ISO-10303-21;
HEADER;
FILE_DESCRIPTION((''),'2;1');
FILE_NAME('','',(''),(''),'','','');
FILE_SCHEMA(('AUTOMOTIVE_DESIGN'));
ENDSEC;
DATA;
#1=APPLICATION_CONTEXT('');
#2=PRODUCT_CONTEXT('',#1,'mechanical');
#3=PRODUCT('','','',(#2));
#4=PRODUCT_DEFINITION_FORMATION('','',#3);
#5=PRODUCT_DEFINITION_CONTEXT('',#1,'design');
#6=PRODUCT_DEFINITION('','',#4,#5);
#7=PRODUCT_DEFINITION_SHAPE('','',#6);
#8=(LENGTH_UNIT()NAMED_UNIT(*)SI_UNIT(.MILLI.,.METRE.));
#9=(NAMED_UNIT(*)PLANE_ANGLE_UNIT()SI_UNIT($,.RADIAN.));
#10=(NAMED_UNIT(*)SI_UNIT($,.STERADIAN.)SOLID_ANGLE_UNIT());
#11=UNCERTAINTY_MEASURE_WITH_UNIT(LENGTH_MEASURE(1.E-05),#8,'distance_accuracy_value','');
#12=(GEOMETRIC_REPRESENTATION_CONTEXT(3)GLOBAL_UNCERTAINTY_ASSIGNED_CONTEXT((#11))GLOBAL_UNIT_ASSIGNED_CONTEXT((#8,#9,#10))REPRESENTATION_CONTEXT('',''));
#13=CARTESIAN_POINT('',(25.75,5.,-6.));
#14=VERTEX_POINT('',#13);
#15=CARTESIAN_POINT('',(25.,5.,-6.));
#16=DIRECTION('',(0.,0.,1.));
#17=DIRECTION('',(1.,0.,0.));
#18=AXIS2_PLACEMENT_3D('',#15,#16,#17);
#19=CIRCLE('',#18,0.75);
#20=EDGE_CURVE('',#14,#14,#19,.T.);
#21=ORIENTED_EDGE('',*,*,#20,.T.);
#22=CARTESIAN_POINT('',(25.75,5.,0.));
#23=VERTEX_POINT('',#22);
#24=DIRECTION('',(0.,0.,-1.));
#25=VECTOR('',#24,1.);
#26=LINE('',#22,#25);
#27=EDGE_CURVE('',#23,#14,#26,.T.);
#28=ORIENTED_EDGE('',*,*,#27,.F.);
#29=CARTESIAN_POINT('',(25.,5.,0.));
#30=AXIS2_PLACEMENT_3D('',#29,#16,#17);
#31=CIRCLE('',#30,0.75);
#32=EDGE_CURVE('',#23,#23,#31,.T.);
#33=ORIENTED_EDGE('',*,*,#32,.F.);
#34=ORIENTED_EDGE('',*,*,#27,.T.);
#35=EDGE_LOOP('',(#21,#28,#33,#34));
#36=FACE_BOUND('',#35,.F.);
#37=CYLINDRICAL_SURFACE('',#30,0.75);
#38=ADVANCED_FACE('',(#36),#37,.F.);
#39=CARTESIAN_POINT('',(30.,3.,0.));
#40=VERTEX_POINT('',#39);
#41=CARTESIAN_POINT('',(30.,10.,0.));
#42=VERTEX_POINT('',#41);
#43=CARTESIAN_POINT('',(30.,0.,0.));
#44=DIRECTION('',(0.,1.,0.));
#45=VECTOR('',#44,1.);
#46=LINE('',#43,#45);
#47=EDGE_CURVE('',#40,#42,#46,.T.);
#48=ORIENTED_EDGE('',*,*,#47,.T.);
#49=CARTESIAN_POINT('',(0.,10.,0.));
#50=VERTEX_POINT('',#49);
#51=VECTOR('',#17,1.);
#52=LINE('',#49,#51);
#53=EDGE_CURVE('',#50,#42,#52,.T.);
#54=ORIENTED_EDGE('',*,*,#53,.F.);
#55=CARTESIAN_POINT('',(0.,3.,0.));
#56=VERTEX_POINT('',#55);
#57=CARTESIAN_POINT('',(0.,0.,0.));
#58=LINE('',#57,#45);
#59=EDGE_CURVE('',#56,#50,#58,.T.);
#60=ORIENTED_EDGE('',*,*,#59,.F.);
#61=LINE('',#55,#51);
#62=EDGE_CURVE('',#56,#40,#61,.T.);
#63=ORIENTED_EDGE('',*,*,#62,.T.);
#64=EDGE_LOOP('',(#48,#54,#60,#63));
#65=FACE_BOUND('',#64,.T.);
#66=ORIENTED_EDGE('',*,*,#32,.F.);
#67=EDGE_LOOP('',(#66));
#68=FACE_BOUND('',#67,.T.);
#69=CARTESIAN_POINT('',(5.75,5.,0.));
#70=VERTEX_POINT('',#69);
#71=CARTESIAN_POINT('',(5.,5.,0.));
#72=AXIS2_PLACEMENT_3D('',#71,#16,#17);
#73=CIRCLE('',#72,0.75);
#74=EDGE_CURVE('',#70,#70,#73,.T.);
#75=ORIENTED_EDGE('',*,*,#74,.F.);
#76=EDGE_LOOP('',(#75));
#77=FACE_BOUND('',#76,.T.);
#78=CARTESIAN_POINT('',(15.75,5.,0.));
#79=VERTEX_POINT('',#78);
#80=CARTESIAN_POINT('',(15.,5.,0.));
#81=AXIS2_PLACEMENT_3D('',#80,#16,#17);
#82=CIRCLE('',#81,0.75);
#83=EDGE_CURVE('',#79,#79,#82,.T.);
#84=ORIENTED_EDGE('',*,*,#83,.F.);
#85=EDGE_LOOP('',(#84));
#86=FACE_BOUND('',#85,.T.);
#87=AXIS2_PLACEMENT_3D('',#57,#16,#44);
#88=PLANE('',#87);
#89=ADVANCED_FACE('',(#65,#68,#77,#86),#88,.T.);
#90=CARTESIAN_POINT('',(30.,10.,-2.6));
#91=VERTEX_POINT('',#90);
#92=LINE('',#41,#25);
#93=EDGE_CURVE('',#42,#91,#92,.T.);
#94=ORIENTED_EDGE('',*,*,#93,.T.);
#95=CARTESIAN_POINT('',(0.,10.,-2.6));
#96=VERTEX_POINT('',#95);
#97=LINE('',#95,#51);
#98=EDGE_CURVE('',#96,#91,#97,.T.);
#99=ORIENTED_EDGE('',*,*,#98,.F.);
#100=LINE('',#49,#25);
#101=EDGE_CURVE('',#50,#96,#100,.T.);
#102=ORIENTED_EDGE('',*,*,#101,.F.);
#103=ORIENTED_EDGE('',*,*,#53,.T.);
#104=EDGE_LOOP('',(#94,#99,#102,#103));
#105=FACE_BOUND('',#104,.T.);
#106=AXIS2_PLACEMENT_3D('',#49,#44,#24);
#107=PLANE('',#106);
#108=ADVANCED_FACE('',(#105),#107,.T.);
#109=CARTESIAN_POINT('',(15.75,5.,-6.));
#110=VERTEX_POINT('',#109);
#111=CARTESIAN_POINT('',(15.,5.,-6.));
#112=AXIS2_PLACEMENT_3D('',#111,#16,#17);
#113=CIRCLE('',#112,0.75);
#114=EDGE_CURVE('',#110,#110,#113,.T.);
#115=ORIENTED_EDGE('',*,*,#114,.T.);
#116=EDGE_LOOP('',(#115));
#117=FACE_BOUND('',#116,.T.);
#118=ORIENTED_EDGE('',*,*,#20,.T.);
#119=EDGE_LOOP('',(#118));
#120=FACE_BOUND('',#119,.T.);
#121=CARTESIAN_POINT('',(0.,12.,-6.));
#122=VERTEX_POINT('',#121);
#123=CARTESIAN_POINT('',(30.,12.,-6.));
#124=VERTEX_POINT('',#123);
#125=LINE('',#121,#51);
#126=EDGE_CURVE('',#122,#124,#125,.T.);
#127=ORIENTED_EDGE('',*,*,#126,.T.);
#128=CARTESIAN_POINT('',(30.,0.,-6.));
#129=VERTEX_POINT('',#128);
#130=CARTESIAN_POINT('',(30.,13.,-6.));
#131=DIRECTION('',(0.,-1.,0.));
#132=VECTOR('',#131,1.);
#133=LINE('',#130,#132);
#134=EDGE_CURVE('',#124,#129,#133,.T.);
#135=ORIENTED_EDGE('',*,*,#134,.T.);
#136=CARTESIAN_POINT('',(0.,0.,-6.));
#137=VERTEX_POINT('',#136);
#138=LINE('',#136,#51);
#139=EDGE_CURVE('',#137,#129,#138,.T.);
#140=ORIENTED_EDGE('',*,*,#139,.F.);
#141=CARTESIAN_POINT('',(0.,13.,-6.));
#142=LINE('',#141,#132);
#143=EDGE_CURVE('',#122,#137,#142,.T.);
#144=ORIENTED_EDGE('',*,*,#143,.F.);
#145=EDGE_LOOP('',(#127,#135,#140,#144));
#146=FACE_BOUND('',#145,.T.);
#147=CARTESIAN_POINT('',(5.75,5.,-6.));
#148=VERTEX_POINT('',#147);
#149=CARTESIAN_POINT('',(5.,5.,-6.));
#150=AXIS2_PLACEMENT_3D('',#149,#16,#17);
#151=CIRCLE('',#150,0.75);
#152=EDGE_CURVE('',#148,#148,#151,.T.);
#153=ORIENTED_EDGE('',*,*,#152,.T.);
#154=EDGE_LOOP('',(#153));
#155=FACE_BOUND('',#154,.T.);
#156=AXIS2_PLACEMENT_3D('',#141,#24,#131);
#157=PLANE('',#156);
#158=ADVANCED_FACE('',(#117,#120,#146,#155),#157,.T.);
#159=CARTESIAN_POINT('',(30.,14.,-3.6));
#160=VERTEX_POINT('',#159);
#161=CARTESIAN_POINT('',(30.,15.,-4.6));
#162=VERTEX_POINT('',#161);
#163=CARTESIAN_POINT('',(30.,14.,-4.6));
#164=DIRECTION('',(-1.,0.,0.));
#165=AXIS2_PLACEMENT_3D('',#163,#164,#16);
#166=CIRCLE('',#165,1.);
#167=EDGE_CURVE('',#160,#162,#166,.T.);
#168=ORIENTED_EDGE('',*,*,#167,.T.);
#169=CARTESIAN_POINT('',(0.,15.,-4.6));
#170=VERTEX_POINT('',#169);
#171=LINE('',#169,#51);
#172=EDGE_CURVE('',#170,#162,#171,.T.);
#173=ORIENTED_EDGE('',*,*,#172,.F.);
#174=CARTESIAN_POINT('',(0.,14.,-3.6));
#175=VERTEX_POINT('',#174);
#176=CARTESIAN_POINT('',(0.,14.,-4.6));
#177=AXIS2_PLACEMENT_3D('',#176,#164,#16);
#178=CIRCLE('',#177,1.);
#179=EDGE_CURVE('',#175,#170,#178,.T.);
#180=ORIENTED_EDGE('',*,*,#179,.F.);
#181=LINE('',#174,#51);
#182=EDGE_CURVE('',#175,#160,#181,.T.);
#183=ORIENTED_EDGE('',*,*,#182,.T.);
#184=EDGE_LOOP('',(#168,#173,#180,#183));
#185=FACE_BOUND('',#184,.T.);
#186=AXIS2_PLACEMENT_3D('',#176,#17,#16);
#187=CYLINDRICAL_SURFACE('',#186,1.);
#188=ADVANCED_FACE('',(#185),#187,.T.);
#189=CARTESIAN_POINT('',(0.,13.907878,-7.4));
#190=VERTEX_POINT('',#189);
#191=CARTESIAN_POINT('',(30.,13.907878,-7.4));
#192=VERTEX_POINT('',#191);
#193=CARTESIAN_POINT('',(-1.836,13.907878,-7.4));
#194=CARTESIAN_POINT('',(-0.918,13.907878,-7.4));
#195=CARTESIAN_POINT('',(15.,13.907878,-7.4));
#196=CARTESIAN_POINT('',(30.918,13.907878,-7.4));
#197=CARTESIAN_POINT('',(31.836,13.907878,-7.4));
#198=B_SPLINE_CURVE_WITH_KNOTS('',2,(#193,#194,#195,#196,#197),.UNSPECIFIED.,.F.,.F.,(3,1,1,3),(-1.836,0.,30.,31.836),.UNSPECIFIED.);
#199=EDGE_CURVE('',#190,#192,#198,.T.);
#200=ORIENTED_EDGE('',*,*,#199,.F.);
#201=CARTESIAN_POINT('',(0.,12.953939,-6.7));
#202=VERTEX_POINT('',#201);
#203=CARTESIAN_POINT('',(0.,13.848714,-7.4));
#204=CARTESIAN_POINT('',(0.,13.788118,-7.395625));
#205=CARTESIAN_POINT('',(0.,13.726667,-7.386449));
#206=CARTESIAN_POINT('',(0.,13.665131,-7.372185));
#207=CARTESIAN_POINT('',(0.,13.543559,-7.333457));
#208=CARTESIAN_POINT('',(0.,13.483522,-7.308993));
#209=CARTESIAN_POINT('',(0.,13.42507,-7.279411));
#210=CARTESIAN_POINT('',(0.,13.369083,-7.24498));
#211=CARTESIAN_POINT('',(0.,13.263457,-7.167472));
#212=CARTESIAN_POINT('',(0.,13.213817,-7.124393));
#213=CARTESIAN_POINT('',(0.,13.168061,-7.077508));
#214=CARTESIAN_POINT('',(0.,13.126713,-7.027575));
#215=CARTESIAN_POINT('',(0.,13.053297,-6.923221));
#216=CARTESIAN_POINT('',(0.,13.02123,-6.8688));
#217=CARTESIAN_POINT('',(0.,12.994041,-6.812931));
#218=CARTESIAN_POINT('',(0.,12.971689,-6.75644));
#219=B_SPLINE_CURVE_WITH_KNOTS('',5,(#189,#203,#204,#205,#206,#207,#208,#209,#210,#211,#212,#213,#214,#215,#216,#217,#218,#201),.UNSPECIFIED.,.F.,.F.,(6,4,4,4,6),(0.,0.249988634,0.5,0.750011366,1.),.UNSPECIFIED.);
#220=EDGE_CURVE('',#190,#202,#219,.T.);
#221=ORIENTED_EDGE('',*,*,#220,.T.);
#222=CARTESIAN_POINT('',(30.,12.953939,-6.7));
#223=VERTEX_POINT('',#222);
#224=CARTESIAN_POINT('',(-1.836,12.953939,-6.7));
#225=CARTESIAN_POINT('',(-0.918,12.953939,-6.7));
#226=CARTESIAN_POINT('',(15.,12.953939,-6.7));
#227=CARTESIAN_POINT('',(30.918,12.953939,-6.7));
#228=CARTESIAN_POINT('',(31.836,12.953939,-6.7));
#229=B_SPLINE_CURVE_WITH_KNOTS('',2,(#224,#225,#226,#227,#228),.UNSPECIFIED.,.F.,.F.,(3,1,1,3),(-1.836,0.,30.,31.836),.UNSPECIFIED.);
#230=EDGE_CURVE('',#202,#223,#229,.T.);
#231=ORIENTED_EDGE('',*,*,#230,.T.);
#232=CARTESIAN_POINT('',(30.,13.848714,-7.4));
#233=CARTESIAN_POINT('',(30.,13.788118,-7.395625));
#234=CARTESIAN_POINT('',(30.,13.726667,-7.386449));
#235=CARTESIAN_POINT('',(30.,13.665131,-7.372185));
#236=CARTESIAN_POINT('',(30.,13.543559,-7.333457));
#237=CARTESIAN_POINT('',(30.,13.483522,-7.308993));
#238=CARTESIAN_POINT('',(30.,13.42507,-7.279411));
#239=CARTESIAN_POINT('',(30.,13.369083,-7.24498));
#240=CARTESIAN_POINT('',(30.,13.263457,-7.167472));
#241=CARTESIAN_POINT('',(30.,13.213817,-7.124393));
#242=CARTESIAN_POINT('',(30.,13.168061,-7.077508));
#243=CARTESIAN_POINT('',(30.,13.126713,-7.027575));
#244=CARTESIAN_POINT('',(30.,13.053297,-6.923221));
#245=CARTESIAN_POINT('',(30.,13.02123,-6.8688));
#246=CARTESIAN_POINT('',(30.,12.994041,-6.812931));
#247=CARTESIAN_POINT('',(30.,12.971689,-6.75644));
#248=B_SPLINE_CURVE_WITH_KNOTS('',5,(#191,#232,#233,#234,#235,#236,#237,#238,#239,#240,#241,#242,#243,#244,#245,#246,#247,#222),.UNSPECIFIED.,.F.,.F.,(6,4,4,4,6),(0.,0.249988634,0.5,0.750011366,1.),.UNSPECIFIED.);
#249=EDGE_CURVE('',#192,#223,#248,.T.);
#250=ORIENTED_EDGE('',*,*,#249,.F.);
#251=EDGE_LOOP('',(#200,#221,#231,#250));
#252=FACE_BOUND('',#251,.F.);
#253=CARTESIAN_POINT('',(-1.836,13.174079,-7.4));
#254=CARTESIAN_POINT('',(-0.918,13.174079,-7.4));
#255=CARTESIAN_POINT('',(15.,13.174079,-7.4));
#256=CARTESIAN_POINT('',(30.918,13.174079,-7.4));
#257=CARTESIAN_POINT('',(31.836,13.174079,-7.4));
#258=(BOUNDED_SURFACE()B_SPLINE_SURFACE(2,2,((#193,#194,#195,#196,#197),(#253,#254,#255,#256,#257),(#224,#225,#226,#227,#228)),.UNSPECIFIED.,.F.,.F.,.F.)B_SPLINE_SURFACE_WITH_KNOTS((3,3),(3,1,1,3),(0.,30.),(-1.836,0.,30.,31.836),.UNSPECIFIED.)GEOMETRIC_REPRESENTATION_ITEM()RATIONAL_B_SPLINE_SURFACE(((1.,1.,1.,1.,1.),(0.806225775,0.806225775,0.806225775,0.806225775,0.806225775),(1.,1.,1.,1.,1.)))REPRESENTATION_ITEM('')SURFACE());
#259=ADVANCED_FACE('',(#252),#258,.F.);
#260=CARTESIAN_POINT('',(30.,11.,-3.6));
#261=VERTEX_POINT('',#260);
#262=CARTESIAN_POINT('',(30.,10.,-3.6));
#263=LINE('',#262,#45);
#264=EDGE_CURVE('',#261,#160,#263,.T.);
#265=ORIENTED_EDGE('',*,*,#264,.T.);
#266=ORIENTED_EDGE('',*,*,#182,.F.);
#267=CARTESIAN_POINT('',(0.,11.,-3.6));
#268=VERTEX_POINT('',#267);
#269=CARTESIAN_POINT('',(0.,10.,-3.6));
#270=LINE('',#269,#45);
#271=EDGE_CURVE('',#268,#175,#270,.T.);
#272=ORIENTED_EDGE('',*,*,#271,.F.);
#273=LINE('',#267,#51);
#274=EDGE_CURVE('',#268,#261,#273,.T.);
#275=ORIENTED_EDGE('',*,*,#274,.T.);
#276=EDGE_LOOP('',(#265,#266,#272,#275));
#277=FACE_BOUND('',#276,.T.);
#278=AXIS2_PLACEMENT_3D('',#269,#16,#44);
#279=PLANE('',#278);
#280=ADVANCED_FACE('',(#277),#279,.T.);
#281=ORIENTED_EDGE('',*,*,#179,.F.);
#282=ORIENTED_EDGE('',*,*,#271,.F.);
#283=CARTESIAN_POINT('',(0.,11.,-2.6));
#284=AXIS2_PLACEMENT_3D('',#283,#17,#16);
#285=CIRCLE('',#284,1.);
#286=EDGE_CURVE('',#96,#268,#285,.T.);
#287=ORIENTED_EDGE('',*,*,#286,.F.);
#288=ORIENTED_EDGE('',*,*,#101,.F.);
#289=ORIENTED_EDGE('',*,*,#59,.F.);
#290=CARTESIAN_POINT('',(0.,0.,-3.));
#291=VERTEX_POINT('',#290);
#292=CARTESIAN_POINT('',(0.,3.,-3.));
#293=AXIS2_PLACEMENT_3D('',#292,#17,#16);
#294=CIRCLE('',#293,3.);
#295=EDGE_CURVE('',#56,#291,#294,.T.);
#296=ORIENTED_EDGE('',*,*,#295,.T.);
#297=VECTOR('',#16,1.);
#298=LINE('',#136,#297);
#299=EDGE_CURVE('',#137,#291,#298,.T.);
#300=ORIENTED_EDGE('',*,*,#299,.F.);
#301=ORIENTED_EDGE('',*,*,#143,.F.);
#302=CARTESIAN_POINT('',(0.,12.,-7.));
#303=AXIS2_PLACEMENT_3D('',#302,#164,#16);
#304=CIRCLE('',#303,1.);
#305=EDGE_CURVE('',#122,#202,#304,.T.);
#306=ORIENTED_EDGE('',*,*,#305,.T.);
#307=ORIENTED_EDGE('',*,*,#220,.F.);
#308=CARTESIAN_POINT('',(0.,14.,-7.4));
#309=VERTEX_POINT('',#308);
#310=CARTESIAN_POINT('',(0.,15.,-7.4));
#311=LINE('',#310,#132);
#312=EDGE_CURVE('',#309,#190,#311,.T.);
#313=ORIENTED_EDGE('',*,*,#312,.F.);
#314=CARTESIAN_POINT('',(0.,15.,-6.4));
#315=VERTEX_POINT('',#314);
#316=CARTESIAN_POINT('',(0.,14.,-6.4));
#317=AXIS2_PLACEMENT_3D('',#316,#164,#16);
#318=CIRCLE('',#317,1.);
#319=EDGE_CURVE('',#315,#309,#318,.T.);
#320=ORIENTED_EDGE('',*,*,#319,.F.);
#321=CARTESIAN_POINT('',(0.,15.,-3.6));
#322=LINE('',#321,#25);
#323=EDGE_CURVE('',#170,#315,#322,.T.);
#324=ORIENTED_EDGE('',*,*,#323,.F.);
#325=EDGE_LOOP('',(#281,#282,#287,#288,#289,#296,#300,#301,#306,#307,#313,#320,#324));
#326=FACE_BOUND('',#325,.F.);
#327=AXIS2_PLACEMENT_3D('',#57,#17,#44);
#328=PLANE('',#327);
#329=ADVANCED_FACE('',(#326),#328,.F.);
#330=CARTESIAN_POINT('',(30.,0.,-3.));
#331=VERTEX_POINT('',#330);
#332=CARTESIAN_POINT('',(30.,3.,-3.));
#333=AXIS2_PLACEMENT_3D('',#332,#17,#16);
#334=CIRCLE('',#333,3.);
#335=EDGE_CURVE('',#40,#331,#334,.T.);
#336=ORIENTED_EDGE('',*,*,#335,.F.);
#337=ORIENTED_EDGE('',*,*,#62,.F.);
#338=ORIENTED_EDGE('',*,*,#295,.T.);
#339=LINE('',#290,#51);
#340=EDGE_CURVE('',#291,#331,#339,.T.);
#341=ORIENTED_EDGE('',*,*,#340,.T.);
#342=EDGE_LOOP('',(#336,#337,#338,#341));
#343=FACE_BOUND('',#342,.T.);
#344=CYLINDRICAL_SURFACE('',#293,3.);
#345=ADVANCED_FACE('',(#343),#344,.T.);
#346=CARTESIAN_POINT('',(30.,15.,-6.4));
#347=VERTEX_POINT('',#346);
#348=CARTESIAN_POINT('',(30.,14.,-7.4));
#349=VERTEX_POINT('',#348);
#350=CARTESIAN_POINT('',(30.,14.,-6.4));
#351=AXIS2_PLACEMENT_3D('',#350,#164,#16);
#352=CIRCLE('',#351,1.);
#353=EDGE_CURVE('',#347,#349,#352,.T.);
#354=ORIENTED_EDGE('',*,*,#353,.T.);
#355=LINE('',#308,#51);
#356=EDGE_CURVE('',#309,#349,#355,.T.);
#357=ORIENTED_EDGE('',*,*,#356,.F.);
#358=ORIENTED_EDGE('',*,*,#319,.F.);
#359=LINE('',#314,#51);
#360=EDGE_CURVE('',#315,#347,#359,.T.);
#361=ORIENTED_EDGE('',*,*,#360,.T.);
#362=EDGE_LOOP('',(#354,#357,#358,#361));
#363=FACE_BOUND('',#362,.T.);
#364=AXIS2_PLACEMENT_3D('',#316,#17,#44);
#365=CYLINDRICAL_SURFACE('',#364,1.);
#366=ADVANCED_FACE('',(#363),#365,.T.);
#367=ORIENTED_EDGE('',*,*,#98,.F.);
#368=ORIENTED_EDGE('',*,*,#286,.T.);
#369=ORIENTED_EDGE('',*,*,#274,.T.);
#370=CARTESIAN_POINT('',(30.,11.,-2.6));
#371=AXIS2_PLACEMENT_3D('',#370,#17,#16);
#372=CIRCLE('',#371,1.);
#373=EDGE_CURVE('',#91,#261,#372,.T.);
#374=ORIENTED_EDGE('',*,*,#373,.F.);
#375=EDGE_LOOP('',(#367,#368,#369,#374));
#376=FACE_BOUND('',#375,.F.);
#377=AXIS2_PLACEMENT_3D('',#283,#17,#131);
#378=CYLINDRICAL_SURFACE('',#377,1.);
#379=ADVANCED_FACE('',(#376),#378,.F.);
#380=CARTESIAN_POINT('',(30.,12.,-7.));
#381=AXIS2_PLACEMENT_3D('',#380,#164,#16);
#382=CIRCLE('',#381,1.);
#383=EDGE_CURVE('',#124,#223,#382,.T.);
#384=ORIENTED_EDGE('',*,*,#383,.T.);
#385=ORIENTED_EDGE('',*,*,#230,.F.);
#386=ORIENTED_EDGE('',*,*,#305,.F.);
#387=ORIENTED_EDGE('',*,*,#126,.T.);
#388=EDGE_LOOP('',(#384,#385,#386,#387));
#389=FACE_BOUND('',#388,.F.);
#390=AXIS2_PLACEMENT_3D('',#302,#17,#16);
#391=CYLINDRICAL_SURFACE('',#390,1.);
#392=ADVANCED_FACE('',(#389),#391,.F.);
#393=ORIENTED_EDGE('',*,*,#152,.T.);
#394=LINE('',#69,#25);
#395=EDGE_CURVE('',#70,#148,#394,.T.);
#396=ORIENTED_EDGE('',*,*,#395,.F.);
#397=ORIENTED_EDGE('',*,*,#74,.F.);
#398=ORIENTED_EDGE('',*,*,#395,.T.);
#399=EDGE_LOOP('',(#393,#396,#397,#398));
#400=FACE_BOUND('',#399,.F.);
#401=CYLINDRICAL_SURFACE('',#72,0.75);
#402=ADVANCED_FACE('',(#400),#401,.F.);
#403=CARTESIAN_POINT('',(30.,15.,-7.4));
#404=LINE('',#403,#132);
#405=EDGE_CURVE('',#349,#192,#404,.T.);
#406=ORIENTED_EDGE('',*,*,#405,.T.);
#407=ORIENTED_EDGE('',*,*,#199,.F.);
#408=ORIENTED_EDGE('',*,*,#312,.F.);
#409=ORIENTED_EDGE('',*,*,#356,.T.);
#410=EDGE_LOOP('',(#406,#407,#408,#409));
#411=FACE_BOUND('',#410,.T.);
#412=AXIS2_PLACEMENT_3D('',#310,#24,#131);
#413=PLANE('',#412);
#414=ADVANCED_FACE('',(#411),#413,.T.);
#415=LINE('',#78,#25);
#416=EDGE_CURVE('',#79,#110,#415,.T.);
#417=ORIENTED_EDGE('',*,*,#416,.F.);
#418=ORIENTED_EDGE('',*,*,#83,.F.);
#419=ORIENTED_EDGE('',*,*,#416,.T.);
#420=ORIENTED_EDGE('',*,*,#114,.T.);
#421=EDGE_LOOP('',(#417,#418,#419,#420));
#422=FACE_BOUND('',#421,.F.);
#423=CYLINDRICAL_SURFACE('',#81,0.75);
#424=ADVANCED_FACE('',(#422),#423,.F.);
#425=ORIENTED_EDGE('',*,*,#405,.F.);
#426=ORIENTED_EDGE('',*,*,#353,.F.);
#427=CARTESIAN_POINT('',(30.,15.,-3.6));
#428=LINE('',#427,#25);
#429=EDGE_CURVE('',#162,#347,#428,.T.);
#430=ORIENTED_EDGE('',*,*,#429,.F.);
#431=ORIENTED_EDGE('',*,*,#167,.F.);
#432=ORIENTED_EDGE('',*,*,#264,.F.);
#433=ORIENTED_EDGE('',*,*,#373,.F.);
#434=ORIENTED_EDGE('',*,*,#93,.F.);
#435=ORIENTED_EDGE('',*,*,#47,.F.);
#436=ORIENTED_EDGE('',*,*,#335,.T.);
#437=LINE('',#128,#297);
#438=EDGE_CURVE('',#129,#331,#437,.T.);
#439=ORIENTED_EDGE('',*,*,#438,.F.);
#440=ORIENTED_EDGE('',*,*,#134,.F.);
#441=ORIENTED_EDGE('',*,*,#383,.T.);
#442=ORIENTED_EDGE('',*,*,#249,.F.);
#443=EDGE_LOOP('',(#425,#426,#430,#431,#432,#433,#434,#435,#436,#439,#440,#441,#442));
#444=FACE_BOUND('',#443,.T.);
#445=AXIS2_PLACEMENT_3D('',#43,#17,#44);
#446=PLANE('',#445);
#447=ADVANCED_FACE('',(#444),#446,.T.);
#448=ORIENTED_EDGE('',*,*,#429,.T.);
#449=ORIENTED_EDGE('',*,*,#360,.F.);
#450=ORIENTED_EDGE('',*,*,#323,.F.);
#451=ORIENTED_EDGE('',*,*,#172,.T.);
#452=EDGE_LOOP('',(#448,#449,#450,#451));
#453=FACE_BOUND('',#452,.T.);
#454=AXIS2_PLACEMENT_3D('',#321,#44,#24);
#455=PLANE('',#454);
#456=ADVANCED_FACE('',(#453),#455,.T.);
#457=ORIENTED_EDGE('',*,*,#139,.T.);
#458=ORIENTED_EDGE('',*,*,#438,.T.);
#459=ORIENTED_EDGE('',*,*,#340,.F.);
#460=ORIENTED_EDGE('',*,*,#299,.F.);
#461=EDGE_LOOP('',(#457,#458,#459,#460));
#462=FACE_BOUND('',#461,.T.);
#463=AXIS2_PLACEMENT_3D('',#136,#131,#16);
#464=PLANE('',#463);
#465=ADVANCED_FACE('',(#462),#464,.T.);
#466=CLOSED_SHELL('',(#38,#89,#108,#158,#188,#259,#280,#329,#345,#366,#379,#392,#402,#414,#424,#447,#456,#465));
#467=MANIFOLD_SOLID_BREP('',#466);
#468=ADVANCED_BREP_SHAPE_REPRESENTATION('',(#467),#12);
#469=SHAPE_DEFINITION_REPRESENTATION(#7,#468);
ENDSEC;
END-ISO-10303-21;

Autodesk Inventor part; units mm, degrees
ref_plane "YZ Plane" through (0, 0, 0) normal (1, 0, 0) x (0, 1, 0)
ref_plane "XZ Plane" through (0, 0, 0) normal (0, 1, 0) x (-1, 0, 0)
ref_plane "XY Plane" through (0, 0, 0) normal (0, 0, 1) x (1, 0, 0)
sketch "Szkic1" plane through (0, 0, 0) normal (1, 0, 0) x (0, 1, 0)
  line L0 (0, 0) -> (10, 0)
  line L1 (10, 0) -> (10, -3.6)
  line L2 (10, -3.6) -> (15, -3.6)
  line L3 (15, -3.6) -> (15, -7.4)
  line L4 (15, -7.4) -> (13, -7.4)
  line L5 (13, -7.4) -> (13, -6)
  line L6 (13, -6) -> (0, -6)
  line L7 (0, -6) -> (0, 0)
  dimension "d1" = 2.4
  dimension "d2" = 3.8
  dimension "d3" = 2
  dimension "d4" = 3.6
  dimension "d5" = 5
  dimension "d6" = 15
extrude "Wyciągnięcie proste1" add sketch "Szkic1" along normal blind 30
fillet "Zaokrąglenie1" radius 3 1 edges at (15, 0, 0)
fillet "Zaokrąglenie2" radius 1 5 edges at (15, 15, -3.6) (15, 10, -3.6) (15, 15, -7.4) (15, 13, -7.4) (15, 13, -6)
sketch "Szkic4" plane through (0, 10, 0) normal (0, 0, 1) x (1, 0, 0)
  line L0 (30, -7) -> (0, -7) projected
  line L1 (30, 0) -> (30, -7) projected
  line L2 (0, 0) -> (30, 0) construction
  line L3 (0, 0) -> (0, -7) projected
  circle A0 centre (25, -5) radius 0.75
  circle A1 centre (15, -5) radius 0.75
  circle A2 centre (5, -5) radius 0.75
  dimension "d27" = 1.5
  dimension "d28" = 2
  dimension "d32" = 10
  dimension "d38" = 30
  dimension "d39" = 15
extrude "Wyciągnięcie proste5" cut sketch "Szkic4" against normal through all
equation "\"d39\" = 0.5 * d38"
properties part number "paliczek_v2" material "PLA"
